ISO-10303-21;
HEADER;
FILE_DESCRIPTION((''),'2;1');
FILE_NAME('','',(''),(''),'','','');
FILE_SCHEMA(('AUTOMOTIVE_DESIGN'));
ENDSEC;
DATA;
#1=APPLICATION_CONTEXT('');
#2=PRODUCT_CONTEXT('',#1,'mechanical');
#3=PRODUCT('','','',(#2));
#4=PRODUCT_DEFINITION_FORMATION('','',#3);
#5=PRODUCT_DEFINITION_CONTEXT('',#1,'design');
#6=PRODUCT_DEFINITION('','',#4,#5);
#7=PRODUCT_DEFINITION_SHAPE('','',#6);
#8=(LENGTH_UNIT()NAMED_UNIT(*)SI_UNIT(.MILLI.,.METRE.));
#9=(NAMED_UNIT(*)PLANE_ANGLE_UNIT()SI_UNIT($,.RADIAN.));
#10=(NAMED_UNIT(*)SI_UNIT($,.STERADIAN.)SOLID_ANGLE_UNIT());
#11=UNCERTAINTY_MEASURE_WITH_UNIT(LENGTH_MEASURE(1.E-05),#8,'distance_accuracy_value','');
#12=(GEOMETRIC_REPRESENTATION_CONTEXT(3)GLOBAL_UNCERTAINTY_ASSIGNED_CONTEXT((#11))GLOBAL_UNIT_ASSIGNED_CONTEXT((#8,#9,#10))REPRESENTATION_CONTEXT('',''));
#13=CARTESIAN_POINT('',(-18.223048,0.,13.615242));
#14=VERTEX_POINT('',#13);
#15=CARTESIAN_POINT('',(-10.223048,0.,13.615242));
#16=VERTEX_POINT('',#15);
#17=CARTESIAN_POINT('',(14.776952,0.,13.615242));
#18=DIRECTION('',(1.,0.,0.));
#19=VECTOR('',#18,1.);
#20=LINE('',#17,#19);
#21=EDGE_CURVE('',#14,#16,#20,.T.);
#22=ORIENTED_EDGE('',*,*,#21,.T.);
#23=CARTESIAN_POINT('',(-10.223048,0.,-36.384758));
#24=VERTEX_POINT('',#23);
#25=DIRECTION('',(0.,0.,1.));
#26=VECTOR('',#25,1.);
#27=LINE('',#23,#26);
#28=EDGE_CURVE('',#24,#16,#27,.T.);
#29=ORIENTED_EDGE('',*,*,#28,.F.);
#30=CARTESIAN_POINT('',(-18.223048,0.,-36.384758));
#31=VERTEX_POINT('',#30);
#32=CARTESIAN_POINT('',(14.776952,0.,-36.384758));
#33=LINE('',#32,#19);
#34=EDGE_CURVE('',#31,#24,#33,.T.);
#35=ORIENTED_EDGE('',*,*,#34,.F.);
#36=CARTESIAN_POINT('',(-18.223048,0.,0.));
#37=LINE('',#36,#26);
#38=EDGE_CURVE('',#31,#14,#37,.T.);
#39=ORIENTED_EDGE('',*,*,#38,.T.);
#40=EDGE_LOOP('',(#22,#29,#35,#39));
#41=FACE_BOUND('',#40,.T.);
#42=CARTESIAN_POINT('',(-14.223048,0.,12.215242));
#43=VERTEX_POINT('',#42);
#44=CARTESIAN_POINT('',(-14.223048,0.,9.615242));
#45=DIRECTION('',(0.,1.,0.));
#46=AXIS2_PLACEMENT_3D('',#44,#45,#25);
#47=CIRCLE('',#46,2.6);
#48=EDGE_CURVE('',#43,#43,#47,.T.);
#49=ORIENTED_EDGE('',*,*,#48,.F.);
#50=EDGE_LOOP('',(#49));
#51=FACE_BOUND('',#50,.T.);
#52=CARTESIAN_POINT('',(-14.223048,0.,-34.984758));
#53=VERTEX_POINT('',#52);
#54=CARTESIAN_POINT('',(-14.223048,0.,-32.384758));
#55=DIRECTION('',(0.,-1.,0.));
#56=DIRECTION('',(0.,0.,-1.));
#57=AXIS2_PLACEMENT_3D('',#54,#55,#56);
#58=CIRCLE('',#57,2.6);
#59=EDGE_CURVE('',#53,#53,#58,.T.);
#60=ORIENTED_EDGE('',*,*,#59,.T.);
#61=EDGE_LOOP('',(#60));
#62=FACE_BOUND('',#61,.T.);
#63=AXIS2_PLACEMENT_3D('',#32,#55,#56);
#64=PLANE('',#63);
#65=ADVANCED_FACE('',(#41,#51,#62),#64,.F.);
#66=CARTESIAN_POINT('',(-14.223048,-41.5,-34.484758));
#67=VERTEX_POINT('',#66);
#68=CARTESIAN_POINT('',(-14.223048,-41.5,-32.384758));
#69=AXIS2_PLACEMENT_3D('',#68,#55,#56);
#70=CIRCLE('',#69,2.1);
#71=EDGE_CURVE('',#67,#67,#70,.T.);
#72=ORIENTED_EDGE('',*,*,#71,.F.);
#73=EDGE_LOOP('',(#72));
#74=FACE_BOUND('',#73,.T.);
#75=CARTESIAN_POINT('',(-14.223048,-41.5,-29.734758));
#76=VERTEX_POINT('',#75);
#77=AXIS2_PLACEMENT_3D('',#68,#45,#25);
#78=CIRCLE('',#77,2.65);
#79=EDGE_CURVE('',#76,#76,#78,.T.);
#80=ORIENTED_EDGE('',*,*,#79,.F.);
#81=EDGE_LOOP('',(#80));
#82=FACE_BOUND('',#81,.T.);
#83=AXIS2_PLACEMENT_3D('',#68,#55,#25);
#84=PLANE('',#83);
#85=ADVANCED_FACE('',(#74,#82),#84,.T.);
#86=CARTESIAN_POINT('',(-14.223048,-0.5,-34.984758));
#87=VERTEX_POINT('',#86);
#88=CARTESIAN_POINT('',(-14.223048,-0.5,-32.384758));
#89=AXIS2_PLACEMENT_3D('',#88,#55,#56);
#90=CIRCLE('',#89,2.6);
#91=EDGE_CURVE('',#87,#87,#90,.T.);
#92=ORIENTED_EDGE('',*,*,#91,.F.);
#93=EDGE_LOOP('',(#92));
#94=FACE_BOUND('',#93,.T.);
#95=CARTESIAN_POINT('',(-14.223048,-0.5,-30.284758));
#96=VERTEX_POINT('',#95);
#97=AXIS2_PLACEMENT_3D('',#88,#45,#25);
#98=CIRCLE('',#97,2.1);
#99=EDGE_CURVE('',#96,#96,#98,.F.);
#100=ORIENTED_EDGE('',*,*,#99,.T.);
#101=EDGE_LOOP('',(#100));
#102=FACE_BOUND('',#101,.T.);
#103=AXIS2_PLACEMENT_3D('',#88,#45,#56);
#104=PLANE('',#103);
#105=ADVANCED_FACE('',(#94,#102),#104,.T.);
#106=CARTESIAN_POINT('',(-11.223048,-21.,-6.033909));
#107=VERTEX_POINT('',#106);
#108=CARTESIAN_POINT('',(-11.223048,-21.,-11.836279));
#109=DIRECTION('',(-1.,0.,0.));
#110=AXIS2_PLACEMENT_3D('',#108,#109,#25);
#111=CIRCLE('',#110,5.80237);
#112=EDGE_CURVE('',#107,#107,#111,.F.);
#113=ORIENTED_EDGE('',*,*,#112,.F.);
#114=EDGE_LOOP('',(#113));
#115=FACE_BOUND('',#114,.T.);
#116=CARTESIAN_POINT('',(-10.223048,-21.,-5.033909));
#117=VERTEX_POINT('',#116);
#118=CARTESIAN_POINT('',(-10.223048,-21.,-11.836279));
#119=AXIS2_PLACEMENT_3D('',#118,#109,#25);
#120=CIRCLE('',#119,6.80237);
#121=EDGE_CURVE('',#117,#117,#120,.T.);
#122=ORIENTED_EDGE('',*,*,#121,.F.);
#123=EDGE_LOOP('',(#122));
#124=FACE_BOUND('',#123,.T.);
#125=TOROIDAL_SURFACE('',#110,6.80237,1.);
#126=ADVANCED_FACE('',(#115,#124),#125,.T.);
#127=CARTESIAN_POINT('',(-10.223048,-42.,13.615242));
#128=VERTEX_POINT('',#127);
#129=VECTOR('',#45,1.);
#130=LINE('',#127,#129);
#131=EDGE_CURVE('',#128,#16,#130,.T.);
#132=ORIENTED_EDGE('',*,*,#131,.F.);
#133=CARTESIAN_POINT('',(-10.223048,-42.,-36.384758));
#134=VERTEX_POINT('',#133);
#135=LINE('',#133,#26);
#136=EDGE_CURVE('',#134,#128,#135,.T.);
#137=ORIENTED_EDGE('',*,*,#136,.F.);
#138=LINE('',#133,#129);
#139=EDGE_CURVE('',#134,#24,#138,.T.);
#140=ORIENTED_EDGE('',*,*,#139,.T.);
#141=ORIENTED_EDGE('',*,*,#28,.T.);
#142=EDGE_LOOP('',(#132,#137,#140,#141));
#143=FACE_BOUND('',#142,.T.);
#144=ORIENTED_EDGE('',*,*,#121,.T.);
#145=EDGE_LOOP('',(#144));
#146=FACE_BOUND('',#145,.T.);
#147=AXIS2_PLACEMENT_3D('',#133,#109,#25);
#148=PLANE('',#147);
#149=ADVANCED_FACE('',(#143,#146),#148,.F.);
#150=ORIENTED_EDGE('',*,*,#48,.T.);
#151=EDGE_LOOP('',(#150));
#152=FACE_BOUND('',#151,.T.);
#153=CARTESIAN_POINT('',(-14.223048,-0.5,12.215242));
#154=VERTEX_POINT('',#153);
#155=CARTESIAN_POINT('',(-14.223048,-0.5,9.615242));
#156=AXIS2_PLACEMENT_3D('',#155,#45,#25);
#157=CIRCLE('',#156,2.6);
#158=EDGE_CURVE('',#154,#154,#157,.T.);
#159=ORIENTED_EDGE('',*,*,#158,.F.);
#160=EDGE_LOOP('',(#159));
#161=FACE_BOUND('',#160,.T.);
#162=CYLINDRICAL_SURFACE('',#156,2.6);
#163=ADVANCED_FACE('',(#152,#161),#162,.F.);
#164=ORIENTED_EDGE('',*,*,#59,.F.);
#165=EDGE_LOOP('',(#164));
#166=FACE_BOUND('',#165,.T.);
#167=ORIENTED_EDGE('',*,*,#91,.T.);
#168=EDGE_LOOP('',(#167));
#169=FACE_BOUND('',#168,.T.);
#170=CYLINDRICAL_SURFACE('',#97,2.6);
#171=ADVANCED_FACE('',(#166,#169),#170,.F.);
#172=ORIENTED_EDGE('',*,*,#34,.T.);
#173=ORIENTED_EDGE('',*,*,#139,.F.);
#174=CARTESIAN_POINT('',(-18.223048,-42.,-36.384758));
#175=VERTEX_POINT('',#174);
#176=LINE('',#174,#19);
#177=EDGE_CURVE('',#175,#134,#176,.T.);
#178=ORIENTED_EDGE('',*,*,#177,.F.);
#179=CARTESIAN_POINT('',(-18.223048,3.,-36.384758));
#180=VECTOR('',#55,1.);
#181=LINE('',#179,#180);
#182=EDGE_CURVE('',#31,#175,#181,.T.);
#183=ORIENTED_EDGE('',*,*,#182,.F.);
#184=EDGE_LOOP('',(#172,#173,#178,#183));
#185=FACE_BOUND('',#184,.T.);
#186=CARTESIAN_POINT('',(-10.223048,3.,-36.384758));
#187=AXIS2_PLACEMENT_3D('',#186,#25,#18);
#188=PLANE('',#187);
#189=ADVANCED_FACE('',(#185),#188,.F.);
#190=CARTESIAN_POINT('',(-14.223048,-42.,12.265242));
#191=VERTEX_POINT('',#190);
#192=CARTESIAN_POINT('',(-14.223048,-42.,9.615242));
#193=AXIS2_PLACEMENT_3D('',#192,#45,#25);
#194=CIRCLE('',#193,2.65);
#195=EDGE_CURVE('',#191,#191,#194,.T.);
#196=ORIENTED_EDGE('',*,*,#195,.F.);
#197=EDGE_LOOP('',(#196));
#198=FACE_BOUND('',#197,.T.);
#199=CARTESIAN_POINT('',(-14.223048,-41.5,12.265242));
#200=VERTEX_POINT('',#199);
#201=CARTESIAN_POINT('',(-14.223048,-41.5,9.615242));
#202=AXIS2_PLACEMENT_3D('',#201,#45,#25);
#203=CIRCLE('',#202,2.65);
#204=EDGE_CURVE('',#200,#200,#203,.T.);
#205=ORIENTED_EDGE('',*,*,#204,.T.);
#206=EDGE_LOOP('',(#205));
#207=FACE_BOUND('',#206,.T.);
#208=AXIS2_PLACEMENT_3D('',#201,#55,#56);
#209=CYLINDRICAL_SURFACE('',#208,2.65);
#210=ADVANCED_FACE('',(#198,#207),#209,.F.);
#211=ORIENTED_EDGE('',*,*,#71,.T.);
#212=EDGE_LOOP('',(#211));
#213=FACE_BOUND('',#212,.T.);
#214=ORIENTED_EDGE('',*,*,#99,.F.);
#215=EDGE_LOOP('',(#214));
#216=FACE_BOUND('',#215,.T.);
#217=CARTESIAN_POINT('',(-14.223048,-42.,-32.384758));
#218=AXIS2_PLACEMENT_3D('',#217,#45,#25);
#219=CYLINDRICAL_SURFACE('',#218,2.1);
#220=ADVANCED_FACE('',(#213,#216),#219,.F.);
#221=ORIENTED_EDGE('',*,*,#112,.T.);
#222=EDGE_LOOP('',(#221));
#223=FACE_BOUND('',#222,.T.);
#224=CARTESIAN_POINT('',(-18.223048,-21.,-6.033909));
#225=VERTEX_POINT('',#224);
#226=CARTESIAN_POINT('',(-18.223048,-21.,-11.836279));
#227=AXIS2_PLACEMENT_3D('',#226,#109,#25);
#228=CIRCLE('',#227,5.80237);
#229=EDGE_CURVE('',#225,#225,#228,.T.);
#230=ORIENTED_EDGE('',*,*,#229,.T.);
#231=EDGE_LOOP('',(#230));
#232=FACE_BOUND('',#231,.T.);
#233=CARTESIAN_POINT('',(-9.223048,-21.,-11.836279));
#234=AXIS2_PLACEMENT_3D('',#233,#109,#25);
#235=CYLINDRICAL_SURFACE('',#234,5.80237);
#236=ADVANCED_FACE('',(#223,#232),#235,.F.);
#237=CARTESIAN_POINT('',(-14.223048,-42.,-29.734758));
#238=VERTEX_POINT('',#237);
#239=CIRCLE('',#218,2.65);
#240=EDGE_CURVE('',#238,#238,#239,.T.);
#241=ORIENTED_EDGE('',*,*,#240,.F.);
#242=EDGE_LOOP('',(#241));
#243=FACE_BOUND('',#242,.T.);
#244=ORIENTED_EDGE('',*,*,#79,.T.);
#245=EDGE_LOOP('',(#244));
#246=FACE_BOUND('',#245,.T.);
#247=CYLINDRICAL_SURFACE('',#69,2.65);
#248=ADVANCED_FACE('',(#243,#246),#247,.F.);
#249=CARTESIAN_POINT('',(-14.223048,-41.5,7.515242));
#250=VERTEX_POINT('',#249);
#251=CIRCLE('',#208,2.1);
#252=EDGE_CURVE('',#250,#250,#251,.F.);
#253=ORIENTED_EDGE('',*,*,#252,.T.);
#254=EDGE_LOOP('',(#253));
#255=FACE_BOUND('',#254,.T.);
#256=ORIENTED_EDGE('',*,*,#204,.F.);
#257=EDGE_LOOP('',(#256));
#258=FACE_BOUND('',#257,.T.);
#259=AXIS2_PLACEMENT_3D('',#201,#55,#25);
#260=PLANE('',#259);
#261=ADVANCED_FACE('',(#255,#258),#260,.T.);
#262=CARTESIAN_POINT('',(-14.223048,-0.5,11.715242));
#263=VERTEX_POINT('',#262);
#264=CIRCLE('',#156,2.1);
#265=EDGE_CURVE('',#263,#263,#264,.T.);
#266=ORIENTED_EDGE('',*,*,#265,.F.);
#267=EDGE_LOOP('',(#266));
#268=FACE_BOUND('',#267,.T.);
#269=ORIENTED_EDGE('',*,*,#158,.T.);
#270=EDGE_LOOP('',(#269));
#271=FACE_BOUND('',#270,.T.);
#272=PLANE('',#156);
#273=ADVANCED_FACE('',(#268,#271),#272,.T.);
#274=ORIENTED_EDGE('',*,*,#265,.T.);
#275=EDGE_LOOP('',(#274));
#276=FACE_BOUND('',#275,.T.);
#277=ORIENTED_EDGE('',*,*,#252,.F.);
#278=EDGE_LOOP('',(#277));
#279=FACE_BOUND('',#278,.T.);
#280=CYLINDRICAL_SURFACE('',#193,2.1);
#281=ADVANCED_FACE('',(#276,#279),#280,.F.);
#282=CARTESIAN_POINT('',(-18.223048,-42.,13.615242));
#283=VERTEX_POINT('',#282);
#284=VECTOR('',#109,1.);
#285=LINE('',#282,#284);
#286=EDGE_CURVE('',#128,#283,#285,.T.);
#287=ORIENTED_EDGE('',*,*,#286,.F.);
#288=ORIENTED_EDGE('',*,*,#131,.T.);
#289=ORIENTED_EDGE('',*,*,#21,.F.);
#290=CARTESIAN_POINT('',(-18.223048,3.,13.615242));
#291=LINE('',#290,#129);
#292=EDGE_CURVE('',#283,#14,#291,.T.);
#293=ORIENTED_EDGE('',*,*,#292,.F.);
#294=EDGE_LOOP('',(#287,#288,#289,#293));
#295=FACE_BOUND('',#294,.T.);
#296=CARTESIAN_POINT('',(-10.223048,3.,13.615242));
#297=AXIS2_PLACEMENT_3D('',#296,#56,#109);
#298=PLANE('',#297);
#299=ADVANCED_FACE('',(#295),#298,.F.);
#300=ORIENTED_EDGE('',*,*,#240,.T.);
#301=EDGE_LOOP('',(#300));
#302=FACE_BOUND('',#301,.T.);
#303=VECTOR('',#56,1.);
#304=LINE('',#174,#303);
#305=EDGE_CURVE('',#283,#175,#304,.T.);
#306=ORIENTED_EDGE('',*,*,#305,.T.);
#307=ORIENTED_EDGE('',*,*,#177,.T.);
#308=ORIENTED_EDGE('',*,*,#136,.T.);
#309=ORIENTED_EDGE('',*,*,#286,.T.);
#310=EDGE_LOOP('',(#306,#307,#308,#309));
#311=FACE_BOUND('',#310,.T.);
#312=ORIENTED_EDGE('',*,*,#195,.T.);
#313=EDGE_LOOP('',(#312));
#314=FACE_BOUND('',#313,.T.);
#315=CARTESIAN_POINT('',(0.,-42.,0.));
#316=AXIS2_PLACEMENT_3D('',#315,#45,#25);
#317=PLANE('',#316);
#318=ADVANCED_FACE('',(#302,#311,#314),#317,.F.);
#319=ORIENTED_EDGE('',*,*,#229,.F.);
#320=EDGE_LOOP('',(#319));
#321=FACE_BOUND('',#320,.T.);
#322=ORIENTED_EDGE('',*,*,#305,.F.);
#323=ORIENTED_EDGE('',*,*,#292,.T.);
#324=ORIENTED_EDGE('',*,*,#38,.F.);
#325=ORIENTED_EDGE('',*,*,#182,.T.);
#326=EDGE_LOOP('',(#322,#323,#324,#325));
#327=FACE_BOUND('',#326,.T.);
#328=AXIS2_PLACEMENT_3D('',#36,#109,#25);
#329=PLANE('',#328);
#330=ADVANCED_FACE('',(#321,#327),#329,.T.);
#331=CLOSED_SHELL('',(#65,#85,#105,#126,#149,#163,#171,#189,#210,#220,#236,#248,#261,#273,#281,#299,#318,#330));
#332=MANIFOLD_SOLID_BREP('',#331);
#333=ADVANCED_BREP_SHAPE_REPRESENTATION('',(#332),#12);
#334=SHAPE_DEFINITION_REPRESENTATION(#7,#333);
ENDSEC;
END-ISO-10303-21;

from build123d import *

# Parameters (mm, degrees)
SKETCH1_W           = 25
SKETCH1_H           = 50
SKETCH1_R           = 3.4
BOSS_EXTRUDE1_DEPTH = 3
SKETCH2_W           = 50
SKETCH2_H           = 3
BOSS_EXTRUDE2_DEPTH = 8
SKETCH3_W           = 8
SKETCH3_H           = 50
BOSS_EXTRUDE3_DEPTH = 42
SKETCH4_R           = 2.65
CUT_EXTRUDE1_DEPTH  = 0.5
SKETCH5_R           = 5.802370205
CUT_EXTRUDE2_DEPTH  = 9
FILLET2_R           = 1
SKETCH6_R           = 12.6
BOSS_EXTRUDE4_DEPTH = 2
FILLET4_R           = 1
SKETCH8_R           = 1.589780168
SKETCH8_R_2         = 1.777428262
CUT_EXTRUDE3_DEPTH  = 10
SKETCH9_W           = 49.021678163
SKETCH9_H           = 20.976854622
CUT_EXTRUDE4_DEPTH  = 68.79439129
SKETCH11_R          = 2.1
CUT_EXTRUDE5_DEPTH  = 59.480168703
SKETCH14_R          = 2.6
CUT_EXTRUDE6_DEPTH  = 0.5


with BuildPart() as part:
    # Sketch1 → Boss-Extrude1 (new body)
    with BuildSketch(Plane(origin=(0, 0, 0), x_dir=(1, 0, 0), z_dir=(0, 1, 0))):
        with Locations((2.276951673, 11.384758364)):
            Rectangle(SKETCH1_W, SKETCH1_H)
        with Locations(Location((1.276951673, 11.384758364, 0), (0, 0, 270))):
            Circle(SKETCH1_R, mode=Mode.SUBTRACT)
    extrude(amount=BOSS_EXTRUDE1_DEPTH)

    # Sketch2 → Boss-Extrude2 (add)
    with BuildSketch(Plane.ZY.offset(10.223048327)):
        with Locations((-11.384758364, 1.5)):
            Rectangle(SKETCH2_W, SKETCH2_H)
    extrude(amount=BOSS_EXTRUDE2_DEPTH)

    # Sketch3 → Boss-Extrude3 (add)
    with BuildSketch(Plane.XZ):
        with Locations((-14.223048327, -11.384758364)):
            Rectangle(SKETCH3_W, SKETCH3_H)
    extrude(amount=BOSS_EXTRUDE3_DEPTH)

    # Sketch4 → Cut-Extrude1 (cut)
    with BuildSketch(Plane(origin=(0, 3, 0), x_dir=(1, 0, 0), z_dir=(0, 1, 0))):
        with Locations(Location((-14.223048327, 32.384758364, 0), (0, 0, 270))):
            Circle(SKETCH4_R)
        with Locations(Location((-14.223048327, -9.615241636, 0), (0, 0, 270))):
            Circle(SKETCH4_R)
    cut_extrude1 = extrude(amount=-CUT_EXTRUDE1_DEPTH, mode=Mode.SUBTRACT)

    # Mirror1: Cut-Extrude1 across plane
    add(cut_extrude1.mirror(Plane.ZX.offset(-19.5)), mode=Mode.SUBTRACT)

    # Sketch5 → Cut-Extrude2 (cut)
    with BuildSketch(Plane.ZY.offset(18.223048327)):
        with Locations((-11.836279124, -21)):
            Circle(SKETCH5_R)
    extrude(amount=-CUT_EXTRUDE2_DEPTH, mode=Mode.SUBTRACT)

    # Fillet2
    fillet2_edges = [part.edges().sort_by_distance(p)[0] for p in [
        (-10.223048327, -21, -17.638649329),
    ]]
    fillet(fillet2_edges, radius=FILLET2_R)

    # Mirror2: Cut-Extrude1 across plane
    add(cut_extrude1.mirror(Plane.ZY.offset(1.723048327)), mode=Mode.SUBTRACT)

    # Sketch6 → Boss-Extrude4 (add)
    with BuildSketch(Plane(origin=(0, 3, 0), x_dir=(1, 0, 0), z_dir=(0, 1, 0))):
        with BuildLine():
            Line((14.776951673, 5.825082115), (14.776951673, 16.944434614))
            ThreePointArc((14.776951673, 16.944434614), (-13.323048327, 11.384758364), (14.776951673, 5.825082115))
        make_face()
        with Locations(Location((1.276951673, 11.384758364, 0), (0, 0, 270))):
            Circle(SKETCH6_R, mode=Mode.SUBTRACT)
    extrude(amount=BOSS_EXTRUDE4_DEPTH)

    # Fillet4
    # the kernel refuses this fillet: 1 mm, written as the material it takes off along each edge
    with BuildSketch(Plane(origin=(14.776951673, 5, -3.325082115), x_dir=(0, -1, 0), z_dir=(0, 0, -1))) as fillet4_piece_1:
        with BuildLine():
            CenterArc((FILLET4_R, FILLET4_R), FILLET4_R, 180, 90)
            Line((0, FILLET4_R), (0, 0))
            Line((0, 0), (FILLET4_R, 0))
        make_face()
    extrude(amount=16.119352499, mode=Mode.SUBTRACT)

    # Sketch8 → Cut-Extrude3 (cut)
    with BuildSketch(Plane(origin=(0, 3, 0), x_dir=(1, 0, 0), z_dir=(0, 1, 0))):
        with Locations(Location((1.276951673, 19.884758364, 0), (0, 0, 270))):
            Circle(SKETCH8_R)
        with Locations(Location((1.276951673, 2.884758364, 0), (0, 0, 270))):
            Circle(SKETCH8_R_2)
    extrude(amount=-CUT_EXTRUDE3_DEPTH, mode=Mode.SUBTRACT)

    # Sketch9 → Cut-Extrude4 (cut, through all)
    with BuildSketch(Plane.XY.offset(13.615241636)):
        with Locations((-9.733887409, 10.488427311)):
            Rectangle(SKETCH9_W, SKETCH9_H)
    extrude(amount=-CUT_EXTRUDE4_DEPTH, mode=Mode.SUBTRACT)

    # Sketch11 → Cut-Extrude5 (cut, through all)
    with BuildSketch(Plane(origin=(0, 0, 0), x_dir=(1, 0, 0), z_dir=(0, 1, 0))):
        with Locations(Location((-14.223048327, 32.384758364, 0), (0, 0, 270))):
            Circle(SKETCH11_R)
    cut_extrude5 = extrude(amount=-CUT_EXTRUDE5_DEPTH, mode=Mode.SUBTRACT)

    # Mirror3: Cut-Extrude5 across plane
    add(cut_extrude5.mirror(Plane.XY.offset(-11.384758364)), mode=Mode.SUBTRACT)

    # Sketch14 → Cut-Extrude6 (cut)
    with BuildSketch(Plane(origin=(0, 0, 0), x_dir=(1, 0, 0), z_dir=(0, 1, 0))):
        with Locations(Location((-14.223048327, -9.615241636, 0), (0, 0, 270))):
            Circle(SKETCH14_R)
    cut_extrude6 = extrude(amount=-CUT_EXTRUDE6_DEPTH, mode=Mode.SUBTRACT)

    # Mirror4: Cut-Extrude6 across plane
    add(cut_extrude6.mirror(Plane.XY.offset(-11.384758364)), mode=Mode.SUBTRACT)


solid = part.part
